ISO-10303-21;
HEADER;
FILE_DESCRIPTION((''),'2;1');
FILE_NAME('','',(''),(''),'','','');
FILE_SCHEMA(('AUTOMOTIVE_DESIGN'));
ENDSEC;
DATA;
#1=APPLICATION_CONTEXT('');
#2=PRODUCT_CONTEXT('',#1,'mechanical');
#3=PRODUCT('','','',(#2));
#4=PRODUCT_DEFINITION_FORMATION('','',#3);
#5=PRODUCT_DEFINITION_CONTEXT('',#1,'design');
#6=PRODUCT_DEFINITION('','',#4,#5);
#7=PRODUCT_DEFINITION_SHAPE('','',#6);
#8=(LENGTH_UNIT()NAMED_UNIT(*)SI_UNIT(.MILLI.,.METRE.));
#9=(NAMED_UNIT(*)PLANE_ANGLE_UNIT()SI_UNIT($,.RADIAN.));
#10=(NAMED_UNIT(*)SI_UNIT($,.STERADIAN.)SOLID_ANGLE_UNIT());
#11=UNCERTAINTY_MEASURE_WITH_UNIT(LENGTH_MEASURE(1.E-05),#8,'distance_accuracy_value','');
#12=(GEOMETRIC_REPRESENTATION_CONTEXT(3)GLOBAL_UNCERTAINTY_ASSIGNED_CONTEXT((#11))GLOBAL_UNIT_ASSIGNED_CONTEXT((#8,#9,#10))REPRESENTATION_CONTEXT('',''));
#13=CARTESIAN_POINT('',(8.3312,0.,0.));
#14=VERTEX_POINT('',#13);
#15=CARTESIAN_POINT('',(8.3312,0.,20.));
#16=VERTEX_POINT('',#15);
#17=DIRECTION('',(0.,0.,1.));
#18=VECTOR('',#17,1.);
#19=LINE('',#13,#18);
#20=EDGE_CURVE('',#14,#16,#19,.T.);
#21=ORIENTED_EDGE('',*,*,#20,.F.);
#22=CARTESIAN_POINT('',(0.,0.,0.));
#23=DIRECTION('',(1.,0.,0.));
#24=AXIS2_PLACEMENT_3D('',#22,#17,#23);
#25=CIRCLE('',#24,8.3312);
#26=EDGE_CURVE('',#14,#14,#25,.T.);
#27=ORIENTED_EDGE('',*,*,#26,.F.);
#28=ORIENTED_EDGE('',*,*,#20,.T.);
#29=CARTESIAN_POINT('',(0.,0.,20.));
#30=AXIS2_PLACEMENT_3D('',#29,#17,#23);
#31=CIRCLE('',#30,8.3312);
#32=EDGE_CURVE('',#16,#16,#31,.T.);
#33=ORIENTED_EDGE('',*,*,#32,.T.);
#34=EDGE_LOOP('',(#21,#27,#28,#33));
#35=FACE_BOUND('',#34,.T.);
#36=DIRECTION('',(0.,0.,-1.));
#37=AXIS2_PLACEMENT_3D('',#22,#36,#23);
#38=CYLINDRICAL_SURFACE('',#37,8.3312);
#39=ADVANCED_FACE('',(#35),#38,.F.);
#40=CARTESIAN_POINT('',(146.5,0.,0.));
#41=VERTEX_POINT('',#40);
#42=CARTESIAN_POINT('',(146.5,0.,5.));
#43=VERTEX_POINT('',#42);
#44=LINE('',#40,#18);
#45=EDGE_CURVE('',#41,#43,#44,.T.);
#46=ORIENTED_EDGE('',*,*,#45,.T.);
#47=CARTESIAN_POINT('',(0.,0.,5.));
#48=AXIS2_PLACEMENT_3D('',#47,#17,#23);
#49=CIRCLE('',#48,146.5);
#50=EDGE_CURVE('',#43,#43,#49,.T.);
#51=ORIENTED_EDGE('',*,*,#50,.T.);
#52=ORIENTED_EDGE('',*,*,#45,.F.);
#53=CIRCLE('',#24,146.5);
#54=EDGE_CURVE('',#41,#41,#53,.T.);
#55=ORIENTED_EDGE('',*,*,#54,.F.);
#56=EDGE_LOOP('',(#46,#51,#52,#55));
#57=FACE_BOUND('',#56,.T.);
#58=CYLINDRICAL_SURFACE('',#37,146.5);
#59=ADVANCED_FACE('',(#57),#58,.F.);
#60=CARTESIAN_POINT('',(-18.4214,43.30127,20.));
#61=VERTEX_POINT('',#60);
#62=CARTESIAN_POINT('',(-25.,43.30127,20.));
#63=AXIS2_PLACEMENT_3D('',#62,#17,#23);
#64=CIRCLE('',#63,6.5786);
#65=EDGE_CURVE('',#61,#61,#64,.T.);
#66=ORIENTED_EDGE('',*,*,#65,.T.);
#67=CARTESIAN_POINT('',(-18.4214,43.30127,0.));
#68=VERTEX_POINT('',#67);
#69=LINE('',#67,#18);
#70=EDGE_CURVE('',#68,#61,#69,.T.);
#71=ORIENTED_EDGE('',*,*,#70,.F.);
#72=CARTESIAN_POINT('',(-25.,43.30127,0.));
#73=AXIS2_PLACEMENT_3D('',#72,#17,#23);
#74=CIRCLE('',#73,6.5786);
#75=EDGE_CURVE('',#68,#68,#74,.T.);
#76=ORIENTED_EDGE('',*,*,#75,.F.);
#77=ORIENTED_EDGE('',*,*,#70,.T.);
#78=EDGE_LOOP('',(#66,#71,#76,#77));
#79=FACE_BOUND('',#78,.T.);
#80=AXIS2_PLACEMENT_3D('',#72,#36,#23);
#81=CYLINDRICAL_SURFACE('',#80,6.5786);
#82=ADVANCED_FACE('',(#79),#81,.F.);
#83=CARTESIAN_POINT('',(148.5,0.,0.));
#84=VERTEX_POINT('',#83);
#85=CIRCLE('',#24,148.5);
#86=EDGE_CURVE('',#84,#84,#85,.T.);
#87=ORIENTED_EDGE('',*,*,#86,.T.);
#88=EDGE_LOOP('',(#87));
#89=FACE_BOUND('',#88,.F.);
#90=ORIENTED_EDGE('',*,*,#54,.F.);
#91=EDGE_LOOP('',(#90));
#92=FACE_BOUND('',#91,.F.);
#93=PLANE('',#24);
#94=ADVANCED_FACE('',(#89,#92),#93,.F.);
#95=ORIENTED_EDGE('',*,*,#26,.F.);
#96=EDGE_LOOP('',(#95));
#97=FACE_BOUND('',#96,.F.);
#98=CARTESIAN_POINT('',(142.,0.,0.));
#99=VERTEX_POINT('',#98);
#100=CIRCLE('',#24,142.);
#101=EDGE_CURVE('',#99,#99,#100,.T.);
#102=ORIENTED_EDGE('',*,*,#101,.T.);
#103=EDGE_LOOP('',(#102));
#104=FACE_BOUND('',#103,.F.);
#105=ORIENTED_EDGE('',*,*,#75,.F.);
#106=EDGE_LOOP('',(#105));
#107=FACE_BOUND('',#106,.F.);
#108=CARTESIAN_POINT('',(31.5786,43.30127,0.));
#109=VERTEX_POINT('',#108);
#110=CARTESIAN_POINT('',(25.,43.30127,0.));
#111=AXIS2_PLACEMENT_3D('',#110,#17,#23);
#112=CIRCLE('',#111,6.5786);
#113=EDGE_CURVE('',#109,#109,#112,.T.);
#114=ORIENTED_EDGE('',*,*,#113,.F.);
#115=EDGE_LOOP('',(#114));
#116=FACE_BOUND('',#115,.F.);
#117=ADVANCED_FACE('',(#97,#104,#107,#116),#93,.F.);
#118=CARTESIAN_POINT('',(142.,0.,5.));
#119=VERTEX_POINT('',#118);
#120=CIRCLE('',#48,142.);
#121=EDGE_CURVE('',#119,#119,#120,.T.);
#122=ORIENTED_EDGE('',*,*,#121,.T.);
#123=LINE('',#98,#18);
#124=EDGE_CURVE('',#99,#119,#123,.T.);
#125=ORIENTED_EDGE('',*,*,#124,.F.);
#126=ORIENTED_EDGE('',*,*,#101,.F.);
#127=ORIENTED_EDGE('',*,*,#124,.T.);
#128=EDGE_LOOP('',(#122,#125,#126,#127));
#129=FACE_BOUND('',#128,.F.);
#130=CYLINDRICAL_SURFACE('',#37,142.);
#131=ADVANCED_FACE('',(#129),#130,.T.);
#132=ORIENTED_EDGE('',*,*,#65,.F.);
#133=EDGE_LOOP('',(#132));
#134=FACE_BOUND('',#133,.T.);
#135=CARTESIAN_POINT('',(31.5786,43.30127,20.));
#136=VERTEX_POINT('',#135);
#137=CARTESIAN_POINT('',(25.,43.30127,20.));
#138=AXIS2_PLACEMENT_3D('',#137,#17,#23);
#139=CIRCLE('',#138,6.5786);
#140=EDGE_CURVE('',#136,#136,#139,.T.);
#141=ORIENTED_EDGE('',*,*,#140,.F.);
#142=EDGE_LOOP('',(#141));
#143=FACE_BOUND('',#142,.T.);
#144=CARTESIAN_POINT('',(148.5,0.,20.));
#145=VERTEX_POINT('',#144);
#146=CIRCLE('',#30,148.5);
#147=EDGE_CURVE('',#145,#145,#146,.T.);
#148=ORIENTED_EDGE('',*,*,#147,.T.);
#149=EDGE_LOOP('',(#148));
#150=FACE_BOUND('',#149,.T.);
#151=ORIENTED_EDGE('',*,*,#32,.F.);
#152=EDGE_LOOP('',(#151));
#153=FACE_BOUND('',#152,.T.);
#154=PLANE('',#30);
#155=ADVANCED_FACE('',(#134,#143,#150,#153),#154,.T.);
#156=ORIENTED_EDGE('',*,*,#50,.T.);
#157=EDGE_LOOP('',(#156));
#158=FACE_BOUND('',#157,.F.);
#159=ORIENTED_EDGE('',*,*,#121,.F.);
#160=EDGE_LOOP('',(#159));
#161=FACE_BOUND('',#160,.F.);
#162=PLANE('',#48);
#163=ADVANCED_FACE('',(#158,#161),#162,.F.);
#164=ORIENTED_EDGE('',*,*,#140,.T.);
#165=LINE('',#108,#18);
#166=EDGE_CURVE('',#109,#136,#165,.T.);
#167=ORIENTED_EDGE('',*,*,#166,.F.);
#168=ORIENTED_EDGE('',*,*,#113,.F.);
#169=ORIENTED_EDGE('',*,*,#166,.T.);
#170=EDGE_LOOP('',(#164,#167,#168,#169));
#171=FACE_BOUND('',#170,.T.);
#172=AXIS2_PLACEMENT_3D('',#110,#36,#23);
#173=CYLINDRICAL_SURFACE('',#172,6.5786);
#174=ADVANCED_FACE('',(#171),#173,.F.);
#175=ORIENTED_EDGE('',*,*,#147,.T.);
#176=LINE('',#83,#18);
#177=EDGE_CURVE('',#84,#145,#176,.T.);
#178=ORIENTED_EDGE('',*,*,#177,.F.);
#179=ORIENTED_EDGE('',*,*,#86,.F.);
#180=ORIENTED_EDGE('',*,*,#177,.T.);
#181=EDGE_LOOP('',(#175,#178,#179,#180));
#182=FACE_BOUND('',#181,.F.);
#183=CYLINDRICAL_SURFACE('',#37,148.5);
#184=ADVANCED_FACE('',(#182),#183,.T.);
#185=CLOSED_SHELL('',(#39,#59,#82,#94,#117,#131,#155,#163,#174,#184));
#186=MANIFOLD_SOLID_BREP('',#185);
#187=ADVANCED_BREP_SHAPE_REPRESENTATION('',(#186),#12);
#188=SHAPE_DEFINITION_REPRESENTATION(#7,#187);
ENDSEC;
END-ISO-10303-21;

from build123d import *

# Parameters (mm, degrees)
F0_R     = 148.5
F0_R_2   = 6.5786
F0_R_3   = 8.3312
F1_DEPTH = 20
F2_R     = 146.5
F2_R_2   = 142
F3_DEPTH = 5


# Not quite as in the source:
# - a feature names something its author has since deleted; it is built from what else it names


with BuildPart() as f1:
    # F0 (on Top) → F1 (new body)
    with BuildSketch(Plane.XY):
        Circle(F0_R)
        with Locations((-25, 43.3012701892)):
            Circle(F0_R_2, mode=Mode.SUBTRACT)
        Circle(F0_R_3, mode=Mode.SUBTRACT)
        with Locations((25, 43.3012701892)):
            Circle(F0_R_2, mode=Mode.SUBTRACT)
    extrude(amount=F1_DEPTH)

    # F2 (on face) → F3 (cut)
    with BuildSketch(Plane.XY):
        Circle(F2_R)
        Circle(F2_R_2, mode=Mode.SUBTRACT)
    extrude(amount=F3_DEPTH, mode=Mode.SUBTRACT)


solid = f1.part
